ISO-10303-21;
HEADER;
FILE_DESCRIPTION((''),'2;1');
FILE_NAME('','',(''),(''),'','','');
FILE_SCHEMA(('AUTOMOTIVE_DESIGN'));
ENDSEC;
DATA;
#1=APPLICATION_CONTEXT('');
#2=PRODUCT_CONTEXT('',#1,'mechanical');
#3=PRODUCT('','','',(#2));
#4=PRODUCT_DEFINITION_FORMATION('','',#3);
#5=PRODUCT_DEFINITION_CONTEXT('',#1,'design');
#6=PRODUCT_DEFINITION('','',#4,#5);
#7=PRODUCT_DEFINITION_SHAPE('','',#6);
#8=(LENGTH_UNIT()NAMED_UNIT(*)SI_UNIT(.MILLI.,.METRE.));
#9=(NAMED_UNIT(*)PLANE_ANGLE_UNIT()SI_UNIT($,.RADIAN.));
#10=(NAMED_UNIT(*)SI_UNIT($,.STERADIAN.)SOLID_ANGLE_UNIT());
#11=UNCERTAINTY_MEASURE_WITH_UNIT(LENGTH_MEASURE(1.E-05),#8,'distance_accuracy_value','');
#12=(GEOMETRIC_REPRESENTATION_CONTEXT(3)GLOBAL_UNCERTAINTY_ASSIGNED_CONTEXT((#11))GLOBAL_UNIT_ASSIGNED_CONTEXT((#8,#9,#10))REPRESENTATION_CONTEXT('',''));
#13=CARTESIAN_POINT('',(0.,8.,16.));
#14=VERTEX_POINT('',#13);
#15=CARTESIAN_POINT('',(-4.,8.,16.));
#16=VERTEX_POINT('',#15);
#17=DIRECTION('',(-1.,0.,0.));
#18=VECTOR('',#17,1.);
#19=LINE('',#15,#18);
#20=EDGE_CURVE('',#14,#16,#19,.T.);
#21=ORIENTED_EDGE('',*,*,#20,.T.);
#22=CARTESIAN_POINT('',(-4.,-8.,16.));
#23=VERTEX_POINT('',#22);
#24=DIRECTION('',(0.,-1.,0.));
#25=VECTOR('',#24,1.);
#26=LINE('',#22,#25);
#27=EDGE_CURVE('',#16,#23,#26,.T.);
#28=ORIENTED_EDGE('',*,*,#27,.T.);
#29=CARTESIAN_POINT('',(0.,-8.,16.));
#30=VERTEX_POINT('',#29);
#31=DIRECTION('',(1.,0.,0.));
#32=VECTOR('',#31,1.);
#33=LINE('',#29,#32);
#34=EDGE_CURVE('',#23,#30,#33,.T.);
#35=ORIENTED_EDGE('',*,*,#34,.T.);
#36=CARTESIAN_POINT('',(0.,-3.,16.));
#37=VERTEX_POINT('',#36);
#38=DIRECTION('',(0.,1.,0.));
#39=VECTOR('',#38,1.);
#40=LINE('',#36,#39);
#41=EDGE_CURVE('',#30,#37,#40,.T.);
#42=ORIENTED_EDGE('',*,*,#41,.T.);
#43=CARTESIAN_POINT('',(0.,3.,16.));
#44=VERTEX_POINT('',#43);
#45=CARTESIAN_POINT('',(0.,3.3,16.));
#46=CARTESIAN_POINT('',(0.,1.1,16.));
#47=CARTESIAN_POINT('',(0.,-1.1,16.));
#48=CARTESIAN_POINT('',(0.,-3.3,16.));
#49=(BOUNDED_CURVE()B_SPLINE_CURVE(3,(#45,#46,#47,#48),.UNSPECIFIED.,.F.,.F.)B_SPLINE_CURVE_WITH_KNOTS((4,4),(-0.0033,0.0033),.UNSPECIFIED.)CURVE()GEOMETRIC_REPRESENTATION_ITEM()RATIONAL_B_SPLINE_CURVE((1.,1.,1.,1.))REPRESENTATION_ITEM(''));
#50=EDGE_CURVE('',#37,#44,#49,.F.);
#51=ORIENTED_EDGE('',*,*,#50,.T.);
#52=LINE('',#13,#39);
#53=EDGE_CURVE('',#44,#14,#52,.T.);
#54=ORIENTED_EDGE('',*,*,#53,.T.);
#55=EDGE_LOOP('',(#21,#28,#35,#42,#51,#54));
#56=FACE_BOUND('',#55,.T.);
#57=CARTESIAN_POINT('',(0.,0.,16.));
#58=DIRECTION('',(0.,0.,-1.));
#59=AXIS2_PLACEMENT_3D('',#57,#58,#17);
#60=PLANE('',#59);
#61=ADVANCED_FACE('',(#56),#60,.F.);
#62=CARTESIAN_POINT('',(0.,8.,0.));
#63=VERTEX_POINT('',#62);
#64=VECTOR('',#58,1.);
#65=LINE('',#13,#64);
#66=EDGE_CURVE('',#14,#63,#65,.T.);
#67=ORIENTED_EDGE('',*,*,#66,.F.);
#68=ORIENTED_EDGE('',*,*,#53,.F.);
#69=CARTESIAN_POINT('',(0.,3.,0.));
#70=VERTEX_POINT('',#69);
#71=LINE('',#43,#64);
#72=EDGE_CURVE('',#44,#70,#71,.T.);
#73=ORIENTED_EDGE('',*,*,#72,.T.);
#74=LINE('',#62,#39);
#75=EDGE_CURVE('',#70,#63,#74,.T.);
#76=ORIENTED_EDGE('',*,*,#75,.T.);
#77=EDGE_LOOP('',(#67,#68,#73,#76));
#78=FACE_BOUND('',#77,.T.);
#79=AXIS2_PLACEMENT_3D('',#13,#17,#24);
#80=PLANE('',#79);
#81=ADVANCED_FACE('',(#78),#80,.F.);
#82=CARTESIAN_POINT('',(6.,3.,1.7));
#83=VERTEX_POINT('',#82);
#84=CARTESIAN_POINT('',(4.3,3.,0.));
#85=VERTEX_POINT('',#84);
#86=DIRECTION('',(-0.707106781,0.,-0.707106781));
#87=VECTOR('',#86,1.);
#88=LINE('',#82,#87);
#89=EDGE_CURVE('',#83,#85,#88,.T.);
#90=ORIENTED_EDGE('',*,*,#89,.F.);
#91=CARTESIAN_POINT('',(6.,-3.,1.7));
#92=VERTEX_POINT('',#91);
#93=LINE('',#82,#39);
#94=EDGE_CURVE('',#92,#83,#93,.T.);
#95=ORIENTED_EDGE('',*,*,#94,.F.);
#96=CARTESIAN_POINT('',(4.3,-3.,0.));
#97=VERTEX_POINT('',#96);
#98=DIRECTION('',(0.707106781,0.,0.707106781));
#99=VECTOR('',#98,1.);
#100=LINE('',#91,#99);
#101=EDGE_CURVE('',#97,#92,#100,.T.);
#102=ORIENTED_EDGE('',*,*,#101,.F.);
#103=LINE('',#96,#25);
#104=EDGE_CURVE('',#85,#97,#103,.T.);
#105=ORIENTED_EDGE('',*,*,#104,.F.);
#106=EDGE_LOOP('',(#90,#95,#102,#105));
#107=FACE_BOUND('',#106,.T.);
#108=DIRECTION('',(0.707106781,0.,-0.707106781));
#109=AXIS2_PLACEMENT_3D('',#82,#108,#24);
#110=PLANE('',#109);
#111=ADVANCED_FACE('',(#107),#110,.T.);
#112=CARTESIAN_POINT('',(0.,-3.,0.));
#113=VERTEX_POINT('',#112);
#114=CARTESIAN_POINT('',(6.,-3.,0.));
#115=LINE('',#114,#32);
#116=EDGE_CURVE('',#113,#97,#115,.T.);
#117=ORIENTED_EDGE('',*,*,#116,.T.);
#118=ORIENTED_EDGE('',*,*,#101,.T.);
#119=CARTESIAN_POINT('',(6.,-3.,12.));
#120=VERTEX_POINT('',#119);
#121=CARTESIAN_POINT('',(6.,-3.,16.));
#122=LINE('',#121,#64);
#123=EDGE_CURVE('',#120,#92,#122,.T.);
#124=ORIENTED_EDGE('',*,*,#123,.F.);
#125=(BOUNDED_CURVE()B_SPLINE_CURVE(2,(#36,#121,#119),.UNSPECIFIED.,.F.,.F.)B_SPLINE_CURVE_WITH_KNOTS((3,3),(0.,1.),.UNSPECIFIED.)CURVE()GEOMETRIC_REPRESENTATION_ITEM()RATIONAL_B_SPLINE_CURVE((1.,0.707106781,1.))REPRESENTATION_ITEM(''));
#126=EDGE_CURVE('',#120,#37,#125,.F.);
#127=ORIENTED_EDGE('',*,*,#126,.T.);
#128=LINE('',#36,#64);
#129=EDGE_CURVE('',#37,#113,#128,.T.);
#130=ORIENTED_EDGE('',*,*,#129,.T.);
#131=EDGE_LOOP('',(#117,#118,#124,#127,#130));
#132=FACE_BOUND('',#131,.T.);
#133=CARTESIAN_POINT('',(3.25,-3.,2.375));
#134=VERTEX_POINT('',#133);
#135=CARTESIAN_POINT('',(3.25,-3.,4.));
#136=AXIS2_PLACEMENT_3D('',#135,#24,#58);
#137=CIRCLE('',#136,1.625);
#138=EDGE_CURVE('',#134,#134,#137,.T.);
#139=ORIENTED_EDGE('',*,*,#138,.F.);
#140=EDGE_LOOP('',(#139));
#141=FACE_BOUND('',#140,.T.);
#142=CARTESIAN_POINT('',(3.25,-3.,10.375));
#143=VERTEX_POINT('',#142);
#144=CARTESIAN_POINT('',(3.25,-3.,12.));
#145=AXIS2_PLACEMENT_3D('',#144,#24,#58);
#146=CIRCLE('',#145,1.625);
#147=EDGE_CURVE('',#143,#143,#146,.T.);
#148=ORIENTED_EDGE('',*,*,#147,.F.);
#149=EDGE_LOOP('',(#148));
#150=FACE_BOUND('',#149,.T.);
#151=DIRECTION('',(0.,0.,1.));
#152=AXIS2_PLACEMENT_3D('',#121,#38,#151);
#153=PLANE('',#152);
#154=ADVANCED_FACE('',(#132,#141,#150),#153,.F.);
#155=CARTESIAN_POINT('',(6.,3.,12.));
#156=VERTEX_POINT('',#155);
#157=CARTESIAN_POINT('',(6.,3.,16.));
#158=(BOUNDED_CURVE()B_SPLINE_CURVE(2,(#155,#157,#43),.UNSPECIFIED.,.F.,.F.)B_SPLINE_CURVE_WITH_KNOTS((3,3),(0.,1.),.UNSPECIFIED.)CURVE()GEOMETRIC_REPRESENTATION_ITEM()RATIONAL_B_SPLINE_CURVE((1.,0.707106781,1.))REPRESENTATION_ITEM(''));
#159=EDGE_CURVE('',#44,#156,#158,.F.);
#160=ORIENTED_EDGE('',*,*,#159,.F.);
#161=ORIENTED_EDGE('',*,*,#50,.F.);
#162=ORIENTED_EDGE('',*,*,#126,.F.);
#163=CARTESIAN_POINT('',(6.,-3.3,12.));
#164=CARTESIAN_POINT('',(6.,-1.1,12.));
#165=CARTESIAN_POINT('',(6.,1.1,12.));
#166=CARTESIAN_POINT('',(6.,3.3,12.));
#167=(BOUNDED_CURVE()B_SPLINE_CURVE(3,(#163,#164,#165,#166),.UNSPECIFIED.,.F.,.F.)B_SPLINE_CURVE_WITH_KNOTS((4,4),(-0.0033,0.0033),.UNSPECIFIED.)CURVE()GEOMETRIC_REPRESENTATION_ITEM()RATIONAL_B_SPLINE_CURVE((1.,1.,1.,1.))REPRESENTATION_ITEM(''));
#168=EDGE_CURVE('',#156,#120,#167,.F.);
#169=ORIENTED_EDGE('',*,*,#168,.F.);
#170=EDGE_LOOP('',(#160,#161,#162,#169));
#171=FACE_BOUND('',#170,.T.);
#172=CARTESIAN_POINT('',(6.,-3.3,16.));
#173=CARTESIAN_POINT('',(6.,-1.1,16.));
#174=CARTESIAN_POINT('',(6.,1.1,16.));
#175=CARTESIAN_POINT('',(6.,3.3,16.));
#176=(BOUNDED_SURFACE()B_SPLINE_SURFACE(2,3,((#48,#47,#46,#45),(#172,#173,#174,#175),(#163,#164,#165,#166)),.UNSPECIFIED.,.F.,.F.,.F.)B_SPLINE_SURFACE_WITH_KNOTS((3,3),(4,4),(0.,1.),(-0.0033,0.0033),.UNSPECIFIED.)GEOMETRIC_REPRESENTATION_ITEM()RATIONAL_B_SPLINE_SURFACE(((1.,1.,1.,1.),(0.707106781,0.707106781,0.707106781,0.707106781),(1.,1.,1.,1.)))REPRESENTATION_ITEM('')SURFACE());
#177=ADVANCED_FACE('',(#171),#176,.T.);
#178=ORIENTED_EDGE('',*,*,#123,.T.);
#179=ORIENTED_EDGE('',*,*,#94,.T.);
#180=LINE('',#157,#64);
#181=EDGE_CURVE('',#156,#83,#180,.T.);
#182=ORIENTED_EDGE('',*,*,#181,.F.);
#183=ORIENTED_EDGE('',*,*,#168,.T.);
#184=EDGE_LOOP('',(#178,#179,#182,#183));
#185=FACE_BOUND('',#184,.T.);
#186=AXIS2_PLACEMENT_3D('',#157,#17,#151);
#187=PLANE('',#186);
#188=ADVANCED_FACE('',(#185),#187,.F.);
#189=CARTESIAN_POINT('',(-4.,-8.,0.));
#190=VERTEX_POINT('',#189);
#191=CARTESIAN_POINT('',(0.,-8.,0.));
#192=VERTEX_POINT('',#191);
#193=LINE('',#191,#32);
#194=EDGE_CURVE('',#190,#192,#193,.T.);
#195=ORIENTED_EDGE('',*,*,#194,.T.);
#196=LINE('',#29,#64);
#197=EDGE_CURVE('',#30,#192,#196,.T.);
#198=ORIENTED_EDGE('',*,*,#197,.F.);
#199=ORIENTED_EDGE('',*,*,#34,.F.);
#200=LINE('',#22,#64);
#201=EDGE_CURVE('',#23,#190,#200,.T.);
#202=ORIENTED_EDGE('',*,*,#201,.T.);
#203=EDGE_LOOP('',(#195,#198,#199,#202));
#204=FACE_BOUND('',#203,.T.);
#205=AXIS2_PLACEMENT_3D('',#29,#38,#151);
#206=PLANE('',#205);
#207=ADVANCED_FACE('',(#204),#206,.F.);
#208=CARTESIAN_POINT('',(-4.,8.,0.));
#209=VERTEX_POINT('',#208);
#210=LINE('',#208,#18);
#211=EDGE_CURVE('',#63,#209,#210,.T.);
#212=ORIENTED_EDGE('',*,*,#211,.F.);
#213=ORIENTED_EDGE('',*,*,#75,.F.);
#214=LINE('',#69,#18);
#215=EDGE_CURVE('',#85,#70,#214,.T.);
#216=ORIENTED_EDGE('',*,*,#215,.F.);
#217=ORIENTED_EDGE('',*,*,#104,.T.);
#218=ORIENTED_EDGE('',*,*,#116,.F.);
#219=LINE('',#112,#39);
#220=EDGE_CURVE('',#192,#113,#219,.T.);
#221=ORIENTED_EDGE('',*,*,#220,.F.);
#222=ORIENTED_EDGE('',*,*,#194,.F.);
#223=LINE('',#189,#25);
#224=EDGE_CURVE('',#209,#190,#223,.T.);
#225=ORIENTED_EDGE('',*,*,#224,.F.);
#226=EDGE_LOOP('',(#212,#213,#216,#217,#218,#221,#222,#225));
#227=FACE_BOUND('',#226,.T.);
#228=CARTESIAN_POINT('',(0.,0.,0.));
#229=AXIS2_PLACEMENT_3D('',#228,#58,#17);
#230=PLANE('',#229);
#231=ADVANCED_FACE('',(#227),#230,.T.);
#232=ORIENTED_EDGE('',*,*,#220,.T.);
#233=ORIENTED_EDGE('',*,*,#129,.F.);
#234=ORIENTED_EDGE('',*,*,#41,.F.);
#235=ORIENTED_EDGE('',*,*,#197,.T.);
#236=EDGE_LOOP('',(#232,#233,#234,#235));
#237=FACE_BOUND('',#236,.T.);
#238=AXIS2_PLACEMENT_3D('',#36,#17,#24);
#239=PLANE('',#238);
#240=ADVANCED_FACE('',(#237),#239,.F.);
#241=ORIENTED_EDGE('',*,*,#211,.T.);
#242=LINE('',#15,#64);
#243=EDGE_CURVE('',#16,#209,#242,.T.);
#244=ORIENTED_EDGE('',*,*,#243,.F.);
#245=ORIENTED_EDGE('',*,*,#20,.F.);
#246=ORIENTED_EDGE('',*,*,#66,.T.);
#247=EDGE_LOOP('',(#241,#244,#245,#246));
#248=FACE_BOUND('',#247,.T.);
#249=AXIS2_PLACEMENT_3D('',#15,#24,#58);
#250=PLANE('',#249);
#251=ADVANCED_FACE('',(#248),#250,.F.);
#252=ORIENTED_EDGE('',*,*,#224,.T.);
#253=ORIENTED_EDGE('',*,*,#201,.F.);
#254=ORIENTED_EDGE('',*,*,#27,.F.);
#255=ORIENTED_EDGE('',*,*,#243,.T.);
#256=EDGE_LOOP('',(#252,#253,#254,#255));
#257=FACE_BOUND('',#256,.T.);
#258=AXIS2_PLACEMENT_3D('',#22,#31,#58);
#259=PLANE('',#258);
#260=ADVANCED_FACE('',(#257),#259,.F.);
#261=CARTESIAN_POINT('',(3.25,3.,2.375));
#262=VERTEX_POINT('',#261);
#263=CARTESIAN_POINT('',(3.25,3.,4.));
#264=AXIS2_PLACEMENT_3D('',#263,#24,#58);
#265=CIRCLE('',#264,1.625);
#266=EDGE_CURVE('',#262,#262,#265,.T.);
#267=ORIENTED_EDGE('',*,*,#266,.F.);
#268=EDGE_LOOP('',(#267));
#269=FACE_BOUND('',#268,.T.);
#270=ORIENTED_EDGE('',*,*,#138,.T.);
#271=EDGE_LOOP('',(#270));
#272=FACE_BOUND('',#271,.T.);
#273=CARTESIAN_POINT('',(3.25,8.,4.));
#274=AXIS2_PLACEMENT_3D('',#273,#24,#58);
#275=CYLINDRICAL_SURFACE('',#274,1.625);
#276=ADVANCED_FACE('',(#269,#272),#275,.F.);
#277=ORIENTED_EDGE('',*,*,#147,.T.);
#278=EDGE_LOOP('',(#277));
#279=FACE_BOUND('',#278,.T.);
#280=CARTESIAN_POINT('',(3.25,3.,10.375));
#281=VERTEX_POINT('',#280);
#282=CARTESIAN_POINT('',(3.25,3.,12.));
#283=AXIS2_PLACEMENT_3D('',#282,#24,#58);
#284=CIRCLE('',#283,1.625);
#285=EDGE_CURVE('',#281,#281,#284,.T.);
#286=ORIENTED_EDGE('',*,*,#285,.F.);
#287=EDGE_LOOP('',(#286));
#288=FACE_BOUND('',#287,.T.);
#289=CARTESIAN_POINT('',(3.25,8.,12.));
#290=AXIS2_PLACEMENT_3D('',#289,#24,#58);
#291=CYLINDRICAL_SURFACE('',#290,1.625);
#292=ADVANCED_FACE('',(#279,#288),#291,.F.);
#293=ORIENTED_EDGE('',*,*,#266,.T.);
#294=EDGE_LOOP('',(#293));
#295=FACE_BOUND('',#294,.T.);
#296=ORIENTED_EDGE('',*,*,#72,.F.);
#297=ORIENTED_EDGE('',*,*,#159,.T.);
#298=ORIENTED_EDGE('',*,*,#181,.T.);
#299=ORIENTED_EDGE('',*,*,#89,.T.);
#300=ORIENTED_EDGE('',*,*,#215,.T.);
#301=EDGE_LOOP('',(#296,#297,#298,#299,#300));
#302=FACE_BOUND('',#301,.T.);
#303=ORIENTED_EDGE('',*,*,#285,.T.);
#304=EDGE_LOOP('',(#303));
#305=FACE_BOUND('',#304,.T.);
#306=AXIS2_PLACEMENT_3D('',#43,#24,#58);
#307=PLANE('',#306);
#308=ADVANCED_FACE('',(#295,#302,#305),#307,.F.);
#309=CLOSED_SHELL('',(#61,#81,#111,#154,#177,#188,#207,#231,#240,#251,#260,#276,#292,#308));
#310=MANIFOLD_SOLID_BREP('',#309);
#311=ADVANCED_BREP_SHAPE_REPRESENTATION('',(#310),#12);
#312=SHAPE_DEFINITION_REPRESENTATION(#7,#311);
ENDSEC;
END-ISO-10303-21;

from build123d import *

# Parameters (mm, degrees)
BOSS_EXTRUDE1_DEPTH = 16
SKETCH2_R           = 1.625
CUT_EXTRUDE1_DEPTH  = 21.322401433
CHAMFER1_SIZE       = 1.7
FILLET1_SIZE        = 4
FILLET1_SIZE_2      = 6


with BuildPart() as part:
    # Sketch1 → Boss-Extrude1 (new body)
    with BuildSketch(Plane.XY):
        Polygon((-4, -8), (-4, 8), (0, 8), (0, 3), (6, 3), (6, -3), (0, -3), (0, -8), align=None)
    extrude(amount=BOSS_EXTRUDE1_DEPTH)

    # Sketch2 → Cut-Extrude1 (cut, through all)
    with BuildSketch(Plane.XZ.offset(3)):
        with Locations(Location((3.25, 12, 0), (0, 0, 270))):
            Circle(SKETCH2_R)
        with Locations(Location((3.25, 4, 0), (0, 0, 270))):
            Circle(SKETCH2_R)
    extrude(amount=-CUT_EXTRUDE1_DEPTH, mode=Mode.SUBTRACT)

    # Chamfer1
    chamfer1_edges = [part.edges().sort_by_distance(p)[0] for p in [
        (6, 0, 0),
    ]]
    chamfer(chamfer1_edges, length=CHAMFER1_SIZE)

    # Fillet1
    # an asymmetric fillet: 6, 4 mm, written as the material it takes off along each edge
    with BuildSketch(Plane(origin=(6, 18, 16), x_dir=(0, 0, -1), z_dir=(0, -1, 0))) as fillet1_piece_1:
        with BuildLine():
            Bezier((FILLET1_SIZE, 0), (0, 0), (0, -FILLET1_SIZE_2), weights=[1, 0.707106781, 1])
            Line((0, -FILLET1_SIZE_2), (0, 0))
            Line((0, 0), (FILLET1_SIZE, 0))
        make_face()
    extrude(amount=36, mode=Mode.SUBTRACT)


solid = part.part
